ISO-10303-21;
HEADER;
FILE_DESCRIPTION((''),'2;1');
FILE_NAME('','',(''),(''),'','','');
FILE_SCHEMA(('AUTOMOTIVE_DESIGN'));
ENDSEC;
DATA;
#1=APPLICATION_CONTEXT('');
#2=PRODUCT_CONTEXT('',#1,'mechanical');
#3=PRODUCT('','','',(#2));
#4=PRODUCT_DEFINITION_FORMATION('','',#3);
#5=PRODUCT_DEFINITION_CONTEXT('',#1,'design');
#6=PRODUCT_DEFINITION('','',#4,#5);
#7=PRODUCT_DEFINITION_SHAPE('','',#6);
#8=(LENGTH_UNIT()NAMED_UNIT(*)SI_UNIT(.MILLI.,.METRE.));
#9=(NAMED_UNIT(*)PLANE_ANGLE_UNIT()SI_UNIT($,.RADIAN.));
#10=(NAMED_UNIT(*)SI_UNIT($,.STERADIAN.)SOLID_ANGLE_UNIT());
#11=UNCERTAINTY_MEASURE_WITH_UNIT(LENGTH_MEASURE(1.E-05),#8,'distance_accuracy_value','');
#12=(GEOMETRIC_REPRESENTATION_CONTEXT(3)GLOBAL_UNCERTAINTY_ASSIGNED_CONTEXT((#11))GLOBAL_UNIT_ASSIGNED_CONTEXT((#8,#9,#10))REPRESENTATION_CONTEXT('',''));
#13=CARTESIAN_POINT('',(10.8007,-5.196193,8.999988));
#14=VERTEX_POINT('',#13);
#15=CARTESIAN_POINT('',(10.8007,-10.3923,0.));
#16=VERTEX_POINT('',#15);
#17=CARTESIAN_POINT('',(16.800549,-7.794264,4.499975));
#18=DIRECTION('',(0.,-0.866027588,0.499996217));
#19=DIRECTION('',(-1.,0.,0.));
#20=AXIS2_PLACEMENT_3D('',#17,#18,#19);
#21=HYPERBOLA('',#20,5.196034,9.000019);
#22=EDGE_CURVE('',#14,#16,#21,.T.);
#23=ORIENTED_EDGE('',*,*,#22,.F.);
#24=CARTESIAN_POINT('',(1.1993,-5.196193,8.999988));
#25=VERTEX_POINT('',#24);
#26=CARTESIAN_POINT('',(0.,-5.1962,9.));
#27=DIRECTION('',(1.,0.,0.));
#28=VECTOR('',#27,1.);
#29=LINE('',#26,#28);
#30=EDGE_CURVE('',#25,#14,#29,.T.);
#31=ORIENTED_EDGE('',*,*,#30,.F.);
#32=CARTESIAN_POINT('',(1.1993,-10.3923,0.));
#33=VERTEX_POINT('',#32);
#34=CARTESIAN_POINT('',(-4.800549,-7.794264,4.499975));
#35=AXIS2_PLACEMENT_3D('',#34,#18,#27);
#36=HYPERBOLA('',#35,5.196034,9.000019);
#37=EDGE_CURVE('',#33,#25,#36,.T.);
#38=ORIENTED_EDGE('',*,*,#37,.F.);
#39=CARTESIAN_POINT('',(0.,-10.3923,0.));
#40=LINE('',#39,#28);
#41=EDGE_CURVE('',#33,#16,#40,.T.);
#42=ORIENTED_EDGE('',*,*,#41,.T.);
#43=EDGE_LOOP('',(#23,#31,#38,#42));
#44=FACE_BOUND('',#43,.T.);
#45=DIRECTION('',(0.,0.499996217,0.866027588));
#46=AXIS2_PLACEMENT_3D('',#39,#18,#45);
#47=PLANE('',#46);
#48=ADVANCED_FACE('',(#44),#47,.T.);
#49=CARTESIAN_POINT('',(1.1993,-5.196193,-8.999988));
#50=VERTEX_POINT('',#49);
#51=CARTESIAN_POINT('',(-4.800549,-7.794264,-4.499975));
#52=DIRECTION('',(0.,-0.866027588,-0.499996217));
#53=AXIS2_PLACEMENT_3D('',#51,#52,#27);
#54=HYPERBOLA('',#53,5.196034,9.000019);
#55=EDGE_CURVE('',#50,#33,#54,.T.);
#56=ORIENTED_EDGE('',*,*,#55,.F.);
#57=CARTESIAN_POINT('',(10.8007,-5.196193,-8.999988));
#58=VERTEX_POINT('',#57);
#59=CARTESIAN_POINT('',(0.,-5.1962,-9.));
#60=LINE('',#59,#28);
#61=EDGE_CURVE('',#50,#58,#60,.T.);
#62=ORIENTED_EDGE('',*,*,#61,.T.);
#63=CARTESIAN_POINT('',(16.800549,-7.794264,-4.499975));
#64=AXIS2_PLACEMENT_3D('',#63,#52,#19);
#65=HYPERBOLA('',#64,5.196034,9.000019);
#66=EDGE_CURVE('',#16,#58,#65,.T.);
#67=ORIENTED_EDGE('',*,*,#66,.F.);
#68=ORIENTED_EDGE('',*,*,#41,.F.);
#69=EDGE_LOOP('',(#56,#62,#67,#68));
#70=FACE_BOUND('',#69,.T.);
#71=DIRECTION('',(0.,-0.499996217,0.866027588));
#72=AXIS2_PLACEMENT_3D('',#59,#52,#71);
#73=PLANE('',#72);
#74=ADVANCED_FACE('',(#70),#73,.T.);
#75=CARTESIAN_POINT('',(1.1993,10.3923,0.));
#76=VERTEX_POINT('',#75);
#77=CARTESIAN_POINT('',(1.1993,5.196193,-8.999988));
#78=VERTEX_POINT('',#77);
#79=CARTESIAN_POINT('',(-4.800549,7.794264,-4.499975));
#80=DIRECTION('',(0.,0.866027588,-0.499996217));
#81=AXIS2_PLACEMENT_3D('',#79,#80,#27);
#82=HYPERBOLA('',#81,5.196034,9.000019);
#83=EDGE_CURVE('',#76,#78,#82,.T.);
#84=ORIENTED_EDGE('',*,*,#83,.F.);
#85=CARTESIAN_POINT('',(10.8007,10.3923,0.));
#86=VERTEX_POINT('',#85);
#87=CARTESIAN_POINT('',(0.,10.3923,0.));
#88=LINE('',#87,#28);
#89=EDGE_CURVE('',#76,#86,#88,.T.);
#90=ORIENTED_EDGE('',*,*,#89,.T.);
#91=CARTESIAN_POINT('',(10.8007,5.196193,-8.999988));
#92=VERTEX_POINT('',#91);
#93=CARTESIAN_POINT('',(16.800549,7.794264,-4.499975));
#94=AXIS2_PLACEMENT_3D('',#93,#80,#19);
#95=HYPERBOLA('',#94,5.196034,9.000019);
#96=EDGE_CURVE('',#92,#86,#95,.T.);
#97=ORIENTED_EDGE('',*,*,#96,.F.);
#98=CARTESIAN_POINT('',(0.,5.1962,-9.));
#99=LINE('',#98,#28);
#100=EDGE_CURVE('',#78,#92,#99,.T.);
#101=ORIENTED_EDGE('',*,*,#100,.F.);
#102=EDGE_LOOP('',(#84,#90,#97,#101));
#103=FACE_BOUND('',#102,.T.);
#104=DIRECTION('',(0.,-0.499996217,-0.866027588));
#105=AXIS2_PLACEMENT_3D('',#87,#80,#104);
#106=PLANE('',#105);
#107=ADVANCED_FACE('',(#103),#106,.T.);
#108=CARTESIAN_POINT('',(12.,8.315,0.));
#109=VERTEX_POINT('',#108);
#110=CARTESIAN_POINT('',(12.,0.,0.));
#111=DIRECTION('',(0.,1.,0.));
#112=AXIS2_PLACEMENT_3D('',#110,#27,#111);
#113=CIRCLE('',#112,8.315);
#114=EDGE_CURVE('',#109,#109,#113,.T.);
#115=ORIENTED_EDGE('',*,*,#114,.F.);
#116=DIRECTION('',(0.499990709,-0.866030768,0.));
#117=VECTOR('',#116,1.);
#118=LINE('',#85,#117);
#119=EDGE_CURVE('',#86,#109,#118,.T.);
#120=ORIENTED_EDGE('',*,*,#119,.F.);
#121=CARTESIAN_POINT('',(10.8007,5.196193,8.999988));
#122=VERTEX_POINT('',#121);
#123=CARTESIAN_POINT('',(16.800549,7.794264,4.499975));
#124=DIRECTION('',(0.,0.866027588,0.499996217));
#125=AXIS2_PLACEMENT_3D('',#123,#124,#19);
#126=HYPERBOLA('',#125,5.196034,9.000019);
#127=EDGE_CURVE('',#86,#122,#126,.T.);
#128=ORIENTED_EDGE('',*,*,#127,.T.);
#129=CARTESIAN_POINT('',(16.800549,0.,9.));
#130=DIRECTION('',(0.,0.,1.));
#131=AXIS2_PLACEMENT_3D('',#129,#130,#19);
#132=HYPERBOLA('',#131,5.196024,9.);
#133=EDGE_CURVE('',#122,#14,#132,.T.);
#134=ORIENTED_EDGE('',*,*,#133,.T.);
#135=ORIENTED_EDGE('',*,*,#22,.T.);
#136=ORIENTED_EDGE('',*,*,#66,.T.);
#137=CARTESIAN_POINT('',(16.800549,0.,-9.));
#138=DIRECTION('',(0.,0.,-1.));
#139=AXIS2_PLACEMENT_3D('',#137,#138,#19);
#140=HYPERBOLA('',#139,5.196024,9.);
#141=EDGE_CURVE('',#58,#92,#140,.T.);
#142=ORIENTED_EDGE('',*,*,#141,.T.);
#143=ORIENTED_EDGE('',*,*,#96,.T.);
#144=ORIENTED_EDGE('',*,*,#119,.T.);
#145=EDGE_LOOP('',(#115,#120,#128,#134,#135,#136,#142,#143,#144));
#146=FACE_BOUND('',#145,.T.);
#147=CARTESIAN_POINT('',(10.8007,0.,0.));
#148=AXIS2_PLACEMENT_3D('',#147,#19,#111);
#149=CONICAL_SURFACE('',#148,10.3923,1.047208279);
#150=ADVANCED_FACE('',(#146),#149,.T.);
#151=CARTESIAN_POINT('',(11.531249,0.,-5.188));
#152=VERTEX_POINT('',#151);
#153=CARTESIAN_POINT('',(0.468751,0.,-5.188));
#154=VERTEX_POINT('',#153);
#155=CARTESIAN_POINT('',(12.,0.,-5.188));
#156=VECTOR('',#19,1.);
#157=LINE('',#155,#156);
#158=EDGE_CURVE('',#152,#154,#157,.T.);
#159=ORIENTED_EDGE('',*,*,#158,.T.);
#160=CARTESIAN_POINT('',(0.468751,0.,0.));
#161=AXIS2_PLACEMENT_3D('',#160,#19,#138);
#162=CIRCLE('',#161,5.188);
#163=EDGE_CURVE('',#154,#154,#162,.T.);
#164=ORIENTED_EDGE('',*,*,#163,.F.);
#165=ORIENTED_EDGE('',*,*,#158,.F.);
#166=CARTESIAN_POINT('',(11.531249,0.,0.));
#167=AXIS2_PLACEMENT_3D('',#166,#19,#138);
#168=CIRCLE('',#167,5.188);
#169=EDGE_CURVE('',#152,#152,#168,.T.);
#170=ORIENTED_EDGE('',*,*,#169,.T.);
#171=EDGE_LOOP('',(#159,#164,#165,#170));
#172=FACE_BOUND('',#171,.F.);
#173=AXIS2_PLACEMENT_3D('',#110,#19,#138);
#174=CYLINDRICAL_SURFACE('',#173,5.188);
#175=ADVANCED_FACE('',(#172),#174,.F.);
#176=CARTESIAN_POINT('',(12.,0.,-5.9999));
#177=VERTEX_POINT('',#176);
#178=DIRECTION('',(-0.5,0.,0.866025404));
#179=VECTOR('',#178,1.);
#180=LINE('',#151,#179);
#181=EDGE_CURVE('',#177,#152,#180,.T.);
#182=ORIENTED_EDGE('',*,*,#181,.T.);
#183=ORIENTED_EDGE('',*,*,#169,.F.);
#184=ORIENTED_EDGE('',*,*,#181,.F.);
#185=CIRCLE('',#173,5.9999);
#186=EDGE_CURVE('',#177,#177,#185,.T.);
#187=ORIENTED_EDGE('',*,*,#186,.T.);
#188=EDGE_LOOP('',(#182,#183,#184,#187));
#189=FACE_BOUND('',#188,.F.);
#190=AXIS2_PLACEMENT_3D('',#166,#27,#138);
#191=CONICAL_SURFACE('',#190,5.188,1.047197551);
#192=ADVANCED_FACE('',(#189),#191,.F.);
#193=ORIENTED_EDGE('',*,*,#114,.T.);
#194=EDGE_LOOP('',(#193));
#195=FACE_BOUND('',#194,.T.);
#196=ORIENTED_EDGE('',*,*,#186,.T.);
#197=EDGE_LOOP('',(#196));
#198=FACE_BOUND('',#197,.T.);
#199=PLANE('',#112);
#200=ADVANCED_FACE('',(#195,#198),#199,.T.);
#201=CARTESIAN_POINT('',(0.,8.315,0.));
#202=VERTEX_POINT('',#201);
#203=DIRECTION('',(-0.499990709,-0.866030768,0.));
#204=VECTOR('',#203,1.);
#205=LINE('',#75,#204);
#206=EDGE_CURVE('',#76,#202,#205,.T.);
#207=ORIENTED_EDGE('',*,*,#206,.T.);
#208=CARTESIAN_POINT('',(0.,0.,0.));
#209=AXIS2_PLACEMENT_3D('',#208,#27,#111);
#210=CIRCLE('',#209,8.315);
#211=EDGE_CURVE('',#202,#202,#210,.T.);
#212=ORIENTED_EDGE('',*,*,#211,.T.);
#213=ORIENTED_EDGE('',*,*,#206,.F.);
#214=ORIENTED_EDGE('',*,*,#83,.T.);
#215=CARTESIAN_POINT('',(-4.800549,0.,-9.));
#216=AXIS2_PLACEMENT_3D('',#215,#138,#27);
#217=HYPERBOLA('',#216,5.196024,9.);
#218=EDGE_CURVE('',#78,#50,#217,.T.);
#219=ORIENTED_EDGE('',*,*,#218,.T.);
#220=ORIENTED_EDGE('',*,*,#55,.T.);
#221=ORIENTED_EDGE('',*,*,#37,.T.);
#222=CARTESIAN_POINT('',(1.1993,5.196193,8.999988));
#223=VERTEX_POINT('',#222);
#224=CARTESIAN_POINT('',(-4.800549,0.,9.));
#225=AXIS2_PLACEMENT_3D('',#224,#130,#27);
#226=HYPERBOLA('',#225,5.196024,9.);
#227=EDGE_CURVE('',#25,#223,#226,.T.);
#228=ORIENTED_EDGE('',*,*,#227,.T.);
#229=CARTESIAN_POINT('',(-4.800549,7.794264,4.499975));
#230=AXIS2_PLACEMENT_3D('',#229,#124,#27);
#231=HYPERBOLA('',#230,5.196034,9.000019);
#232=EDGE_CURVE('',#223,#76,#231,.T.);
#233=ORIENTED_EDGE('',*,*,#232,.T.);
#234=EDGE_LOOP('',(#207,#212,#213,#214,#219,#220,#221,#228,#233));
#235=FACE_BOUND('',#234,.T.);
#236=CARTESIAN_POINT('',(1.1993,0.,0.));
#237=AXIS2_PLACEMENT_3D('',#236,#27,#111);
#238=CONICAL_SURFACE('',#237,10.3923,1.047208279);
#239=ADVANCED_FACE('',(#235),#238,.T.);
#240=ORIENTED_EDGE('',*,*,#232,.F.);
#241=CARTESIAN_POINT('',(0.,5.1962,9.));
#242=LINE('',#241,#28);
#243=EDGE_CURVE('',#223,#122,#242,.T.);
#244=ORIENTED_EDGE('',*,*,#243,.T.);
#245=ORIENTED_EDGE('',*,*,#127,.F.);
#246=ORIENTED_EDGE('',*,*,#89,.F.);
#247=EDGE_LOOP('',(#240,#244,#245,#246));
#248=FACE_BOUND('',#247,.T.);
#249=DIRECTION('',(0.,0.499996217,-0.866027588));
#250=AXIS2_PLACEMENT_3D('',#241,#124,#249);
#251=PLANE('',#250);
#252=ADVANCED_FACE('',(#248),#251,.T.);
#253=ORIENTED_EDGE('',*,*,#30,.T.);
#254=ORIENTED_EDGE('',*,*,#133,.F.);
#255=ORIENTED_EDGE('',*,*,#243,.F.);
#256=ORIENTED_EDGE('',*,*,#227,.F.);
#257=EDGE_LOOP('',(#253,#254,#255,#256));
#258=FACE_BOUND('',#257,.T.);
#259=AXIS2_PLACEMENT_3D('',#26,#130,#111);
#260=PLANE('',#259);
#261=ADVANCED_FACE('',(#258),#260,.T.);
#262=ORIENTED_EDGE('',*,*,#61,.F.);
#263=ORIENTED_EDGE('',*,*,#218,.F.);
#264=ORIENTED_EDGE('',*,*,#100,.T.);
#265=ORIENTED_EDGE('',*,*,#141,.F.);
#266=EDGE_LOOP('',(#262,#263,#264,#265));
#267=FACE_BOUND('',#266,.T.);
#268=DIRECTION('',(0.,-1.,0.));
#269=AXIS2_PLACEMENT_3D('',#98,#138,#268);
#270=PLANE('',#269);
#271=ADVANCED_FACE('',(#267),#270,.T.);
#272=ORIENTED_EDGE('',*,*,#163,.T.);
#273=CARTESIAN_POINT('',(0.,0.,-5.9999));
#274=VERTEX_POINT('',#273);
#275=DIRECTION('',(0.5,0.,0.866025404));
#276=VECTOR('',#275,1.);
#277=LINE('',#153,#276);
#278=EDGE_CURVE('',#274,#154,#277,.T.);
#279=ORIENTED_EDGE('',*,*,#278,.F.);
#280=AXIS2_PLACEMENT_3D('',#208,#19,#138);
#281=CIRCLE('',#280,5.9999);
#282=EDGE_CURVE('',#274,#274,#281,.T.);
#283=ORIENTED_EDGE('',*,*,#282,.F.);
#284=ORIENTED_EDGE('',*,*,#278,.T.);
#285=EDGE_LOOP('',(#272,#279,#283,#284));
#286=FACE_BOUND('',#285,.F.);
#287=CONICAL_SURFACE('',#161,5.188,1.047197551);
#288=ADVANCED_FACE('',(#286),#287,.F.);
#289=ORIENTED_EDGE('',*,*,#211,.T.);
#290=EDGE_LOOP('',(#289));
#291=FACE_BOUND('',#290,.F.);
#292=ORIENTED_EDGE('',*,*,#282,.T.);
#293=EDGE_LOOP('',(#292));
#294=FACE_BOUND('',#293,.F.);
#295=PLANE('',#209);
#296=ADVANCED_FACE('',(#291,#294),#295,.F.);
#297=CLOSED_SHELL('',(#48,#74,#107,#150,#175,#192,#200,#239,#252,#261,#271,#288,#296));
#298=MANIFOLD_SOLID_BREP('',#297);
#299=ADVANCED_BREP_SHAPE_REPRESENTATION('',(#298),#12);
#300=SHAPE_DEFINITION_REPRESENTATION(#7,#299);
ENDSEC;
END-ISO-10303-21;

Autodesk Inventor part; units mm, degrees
ref_plane "YZ Plane" through (0, 0, 0) normal (1, 0, 0) x (0, 1, 0)
ref_plane "XZ Plane" through (0, 0, 0) normal (0, 1, 0) x (-1, 0, 0)
sketch "Skizze1" plane through (0, 0, 0) normal (1, 0, 0) x (0, 1, 0)
  line L0 (-10.3923, 0) -> (-5.1962, 9)
  line L1 (-5.1962, 9) -> (5.1962, 9)
  line L2 (5.1962, 9) -> (10.3923, 0)
  line L3 (10.3923, 0) -> (5.1962, -9)
  line L4 (5.1962, -9) -> (-5.1962, -9)
  line L5 (-5.1962, -9) -> (-10.3923, 0)
  point P0 (0, 0)
  point P1 (0, 0)
  dimension "d0" = 20.7846
extrude "Körper" add sketch "Skizze1" along normal blind 12
sketch "Skizze2" plane through (0, 0, 0) normal (0, 0, 1) x (1, 0, 0)
  line L0 (0, 5.1962) -> (0, 10.3923) projected
  line L1 (0, 10.3923) -> (12, 10.3923) projected
  line L2 (12, 5.1962) -> (12, 10.3923) projected
  line L3 (-2.4, 0) -> (14.4, 0) projected
  line L4 (1.1993, 10.3923) -> (0, 8.315)
  line L5 (10.8007, 10.3923) -> (12, 8.315)
  dimension "d3" = 30
  dimension "d4" = 30
  dimension "d5" = 16.63
  dimension "d6" = 16.63
revolve "Fase1" cut sketch "Skizze2" angle 360 about axis through (-10, 0, 0) along (1, 0, 0)
sketch "Skizze3" plane through (12, 0, 0) normal (1, 0, 0) x (0, 0, -1)
  arc A0 (-0.625, -1.0825) -> (0.625, -1.0825) centre (0, 0) ccw projected
hole "Gewinde" at (12, 0, 0) direction (-1, 0, 0) diameter 10.376 end through all thread size "M12x1.5" class "6H" standard "ISO Metric profile"
chamfer "Fase2" distance 0.8119 angle 30 1 edges at (12, 0, 5.188) measured on face at (12, 7.1795, -0.8718)
chamfer "Fase3" distance 0.8119 angle 30 1 edges at (0, 0, 5.188) measured on face at (0, 7.1795, -0.8718)
ref_plane "Work Plane1" through (-18.2456, 0, 0) normal (0, -0.8660254, -0.5) x (1, 0, 0)
equation "\"d0\" = 1.1547 * SW"
equation "\"d1\" = KOH"
equation "\"d3\" = ANG1"
equation "\"d4\" = ANG2"
equation "\"d5\" = SW0"
equation "\"d6\" = SW01"
equation "\"d8\" = -0.5 * GD1 + 0.5 * NND"
equation "\"d40\" = -0.5 * GD1 + 0.5 * NND"
equation "\"d10\" = -0.5 * GD1 + 0.5 * NND"
equation "\"d41\" = -0.5 * GD1 + 0.5 * NND"
equation "\"ANG1\" = 30deg"
equation "\"ANG2\" = 30deg"
equation "\"NND\" = 12"
equation "\"KOH\" = 12"
equation "\"SW\" = 18"
equation "\"SW0\" = 16.63"
equation "\"SW01\" = SW0"
equation "\"GUL\" = 0.541266 * PTC"
equation "\"THREADDIA\" = 12"
equation "\"TOA\" = 30deg"
equation "\"PTC\" = 1.5"
equation "\"E0\" = 20.03"
equation "\"GAL\" = 0.541266 * PTC"
equation "\"KOH1\" = 9.26"
equation "\"GD1\" = 10.376202"
properties part number "ISO 8674 - M12 x 1,5" material "Stahl"
